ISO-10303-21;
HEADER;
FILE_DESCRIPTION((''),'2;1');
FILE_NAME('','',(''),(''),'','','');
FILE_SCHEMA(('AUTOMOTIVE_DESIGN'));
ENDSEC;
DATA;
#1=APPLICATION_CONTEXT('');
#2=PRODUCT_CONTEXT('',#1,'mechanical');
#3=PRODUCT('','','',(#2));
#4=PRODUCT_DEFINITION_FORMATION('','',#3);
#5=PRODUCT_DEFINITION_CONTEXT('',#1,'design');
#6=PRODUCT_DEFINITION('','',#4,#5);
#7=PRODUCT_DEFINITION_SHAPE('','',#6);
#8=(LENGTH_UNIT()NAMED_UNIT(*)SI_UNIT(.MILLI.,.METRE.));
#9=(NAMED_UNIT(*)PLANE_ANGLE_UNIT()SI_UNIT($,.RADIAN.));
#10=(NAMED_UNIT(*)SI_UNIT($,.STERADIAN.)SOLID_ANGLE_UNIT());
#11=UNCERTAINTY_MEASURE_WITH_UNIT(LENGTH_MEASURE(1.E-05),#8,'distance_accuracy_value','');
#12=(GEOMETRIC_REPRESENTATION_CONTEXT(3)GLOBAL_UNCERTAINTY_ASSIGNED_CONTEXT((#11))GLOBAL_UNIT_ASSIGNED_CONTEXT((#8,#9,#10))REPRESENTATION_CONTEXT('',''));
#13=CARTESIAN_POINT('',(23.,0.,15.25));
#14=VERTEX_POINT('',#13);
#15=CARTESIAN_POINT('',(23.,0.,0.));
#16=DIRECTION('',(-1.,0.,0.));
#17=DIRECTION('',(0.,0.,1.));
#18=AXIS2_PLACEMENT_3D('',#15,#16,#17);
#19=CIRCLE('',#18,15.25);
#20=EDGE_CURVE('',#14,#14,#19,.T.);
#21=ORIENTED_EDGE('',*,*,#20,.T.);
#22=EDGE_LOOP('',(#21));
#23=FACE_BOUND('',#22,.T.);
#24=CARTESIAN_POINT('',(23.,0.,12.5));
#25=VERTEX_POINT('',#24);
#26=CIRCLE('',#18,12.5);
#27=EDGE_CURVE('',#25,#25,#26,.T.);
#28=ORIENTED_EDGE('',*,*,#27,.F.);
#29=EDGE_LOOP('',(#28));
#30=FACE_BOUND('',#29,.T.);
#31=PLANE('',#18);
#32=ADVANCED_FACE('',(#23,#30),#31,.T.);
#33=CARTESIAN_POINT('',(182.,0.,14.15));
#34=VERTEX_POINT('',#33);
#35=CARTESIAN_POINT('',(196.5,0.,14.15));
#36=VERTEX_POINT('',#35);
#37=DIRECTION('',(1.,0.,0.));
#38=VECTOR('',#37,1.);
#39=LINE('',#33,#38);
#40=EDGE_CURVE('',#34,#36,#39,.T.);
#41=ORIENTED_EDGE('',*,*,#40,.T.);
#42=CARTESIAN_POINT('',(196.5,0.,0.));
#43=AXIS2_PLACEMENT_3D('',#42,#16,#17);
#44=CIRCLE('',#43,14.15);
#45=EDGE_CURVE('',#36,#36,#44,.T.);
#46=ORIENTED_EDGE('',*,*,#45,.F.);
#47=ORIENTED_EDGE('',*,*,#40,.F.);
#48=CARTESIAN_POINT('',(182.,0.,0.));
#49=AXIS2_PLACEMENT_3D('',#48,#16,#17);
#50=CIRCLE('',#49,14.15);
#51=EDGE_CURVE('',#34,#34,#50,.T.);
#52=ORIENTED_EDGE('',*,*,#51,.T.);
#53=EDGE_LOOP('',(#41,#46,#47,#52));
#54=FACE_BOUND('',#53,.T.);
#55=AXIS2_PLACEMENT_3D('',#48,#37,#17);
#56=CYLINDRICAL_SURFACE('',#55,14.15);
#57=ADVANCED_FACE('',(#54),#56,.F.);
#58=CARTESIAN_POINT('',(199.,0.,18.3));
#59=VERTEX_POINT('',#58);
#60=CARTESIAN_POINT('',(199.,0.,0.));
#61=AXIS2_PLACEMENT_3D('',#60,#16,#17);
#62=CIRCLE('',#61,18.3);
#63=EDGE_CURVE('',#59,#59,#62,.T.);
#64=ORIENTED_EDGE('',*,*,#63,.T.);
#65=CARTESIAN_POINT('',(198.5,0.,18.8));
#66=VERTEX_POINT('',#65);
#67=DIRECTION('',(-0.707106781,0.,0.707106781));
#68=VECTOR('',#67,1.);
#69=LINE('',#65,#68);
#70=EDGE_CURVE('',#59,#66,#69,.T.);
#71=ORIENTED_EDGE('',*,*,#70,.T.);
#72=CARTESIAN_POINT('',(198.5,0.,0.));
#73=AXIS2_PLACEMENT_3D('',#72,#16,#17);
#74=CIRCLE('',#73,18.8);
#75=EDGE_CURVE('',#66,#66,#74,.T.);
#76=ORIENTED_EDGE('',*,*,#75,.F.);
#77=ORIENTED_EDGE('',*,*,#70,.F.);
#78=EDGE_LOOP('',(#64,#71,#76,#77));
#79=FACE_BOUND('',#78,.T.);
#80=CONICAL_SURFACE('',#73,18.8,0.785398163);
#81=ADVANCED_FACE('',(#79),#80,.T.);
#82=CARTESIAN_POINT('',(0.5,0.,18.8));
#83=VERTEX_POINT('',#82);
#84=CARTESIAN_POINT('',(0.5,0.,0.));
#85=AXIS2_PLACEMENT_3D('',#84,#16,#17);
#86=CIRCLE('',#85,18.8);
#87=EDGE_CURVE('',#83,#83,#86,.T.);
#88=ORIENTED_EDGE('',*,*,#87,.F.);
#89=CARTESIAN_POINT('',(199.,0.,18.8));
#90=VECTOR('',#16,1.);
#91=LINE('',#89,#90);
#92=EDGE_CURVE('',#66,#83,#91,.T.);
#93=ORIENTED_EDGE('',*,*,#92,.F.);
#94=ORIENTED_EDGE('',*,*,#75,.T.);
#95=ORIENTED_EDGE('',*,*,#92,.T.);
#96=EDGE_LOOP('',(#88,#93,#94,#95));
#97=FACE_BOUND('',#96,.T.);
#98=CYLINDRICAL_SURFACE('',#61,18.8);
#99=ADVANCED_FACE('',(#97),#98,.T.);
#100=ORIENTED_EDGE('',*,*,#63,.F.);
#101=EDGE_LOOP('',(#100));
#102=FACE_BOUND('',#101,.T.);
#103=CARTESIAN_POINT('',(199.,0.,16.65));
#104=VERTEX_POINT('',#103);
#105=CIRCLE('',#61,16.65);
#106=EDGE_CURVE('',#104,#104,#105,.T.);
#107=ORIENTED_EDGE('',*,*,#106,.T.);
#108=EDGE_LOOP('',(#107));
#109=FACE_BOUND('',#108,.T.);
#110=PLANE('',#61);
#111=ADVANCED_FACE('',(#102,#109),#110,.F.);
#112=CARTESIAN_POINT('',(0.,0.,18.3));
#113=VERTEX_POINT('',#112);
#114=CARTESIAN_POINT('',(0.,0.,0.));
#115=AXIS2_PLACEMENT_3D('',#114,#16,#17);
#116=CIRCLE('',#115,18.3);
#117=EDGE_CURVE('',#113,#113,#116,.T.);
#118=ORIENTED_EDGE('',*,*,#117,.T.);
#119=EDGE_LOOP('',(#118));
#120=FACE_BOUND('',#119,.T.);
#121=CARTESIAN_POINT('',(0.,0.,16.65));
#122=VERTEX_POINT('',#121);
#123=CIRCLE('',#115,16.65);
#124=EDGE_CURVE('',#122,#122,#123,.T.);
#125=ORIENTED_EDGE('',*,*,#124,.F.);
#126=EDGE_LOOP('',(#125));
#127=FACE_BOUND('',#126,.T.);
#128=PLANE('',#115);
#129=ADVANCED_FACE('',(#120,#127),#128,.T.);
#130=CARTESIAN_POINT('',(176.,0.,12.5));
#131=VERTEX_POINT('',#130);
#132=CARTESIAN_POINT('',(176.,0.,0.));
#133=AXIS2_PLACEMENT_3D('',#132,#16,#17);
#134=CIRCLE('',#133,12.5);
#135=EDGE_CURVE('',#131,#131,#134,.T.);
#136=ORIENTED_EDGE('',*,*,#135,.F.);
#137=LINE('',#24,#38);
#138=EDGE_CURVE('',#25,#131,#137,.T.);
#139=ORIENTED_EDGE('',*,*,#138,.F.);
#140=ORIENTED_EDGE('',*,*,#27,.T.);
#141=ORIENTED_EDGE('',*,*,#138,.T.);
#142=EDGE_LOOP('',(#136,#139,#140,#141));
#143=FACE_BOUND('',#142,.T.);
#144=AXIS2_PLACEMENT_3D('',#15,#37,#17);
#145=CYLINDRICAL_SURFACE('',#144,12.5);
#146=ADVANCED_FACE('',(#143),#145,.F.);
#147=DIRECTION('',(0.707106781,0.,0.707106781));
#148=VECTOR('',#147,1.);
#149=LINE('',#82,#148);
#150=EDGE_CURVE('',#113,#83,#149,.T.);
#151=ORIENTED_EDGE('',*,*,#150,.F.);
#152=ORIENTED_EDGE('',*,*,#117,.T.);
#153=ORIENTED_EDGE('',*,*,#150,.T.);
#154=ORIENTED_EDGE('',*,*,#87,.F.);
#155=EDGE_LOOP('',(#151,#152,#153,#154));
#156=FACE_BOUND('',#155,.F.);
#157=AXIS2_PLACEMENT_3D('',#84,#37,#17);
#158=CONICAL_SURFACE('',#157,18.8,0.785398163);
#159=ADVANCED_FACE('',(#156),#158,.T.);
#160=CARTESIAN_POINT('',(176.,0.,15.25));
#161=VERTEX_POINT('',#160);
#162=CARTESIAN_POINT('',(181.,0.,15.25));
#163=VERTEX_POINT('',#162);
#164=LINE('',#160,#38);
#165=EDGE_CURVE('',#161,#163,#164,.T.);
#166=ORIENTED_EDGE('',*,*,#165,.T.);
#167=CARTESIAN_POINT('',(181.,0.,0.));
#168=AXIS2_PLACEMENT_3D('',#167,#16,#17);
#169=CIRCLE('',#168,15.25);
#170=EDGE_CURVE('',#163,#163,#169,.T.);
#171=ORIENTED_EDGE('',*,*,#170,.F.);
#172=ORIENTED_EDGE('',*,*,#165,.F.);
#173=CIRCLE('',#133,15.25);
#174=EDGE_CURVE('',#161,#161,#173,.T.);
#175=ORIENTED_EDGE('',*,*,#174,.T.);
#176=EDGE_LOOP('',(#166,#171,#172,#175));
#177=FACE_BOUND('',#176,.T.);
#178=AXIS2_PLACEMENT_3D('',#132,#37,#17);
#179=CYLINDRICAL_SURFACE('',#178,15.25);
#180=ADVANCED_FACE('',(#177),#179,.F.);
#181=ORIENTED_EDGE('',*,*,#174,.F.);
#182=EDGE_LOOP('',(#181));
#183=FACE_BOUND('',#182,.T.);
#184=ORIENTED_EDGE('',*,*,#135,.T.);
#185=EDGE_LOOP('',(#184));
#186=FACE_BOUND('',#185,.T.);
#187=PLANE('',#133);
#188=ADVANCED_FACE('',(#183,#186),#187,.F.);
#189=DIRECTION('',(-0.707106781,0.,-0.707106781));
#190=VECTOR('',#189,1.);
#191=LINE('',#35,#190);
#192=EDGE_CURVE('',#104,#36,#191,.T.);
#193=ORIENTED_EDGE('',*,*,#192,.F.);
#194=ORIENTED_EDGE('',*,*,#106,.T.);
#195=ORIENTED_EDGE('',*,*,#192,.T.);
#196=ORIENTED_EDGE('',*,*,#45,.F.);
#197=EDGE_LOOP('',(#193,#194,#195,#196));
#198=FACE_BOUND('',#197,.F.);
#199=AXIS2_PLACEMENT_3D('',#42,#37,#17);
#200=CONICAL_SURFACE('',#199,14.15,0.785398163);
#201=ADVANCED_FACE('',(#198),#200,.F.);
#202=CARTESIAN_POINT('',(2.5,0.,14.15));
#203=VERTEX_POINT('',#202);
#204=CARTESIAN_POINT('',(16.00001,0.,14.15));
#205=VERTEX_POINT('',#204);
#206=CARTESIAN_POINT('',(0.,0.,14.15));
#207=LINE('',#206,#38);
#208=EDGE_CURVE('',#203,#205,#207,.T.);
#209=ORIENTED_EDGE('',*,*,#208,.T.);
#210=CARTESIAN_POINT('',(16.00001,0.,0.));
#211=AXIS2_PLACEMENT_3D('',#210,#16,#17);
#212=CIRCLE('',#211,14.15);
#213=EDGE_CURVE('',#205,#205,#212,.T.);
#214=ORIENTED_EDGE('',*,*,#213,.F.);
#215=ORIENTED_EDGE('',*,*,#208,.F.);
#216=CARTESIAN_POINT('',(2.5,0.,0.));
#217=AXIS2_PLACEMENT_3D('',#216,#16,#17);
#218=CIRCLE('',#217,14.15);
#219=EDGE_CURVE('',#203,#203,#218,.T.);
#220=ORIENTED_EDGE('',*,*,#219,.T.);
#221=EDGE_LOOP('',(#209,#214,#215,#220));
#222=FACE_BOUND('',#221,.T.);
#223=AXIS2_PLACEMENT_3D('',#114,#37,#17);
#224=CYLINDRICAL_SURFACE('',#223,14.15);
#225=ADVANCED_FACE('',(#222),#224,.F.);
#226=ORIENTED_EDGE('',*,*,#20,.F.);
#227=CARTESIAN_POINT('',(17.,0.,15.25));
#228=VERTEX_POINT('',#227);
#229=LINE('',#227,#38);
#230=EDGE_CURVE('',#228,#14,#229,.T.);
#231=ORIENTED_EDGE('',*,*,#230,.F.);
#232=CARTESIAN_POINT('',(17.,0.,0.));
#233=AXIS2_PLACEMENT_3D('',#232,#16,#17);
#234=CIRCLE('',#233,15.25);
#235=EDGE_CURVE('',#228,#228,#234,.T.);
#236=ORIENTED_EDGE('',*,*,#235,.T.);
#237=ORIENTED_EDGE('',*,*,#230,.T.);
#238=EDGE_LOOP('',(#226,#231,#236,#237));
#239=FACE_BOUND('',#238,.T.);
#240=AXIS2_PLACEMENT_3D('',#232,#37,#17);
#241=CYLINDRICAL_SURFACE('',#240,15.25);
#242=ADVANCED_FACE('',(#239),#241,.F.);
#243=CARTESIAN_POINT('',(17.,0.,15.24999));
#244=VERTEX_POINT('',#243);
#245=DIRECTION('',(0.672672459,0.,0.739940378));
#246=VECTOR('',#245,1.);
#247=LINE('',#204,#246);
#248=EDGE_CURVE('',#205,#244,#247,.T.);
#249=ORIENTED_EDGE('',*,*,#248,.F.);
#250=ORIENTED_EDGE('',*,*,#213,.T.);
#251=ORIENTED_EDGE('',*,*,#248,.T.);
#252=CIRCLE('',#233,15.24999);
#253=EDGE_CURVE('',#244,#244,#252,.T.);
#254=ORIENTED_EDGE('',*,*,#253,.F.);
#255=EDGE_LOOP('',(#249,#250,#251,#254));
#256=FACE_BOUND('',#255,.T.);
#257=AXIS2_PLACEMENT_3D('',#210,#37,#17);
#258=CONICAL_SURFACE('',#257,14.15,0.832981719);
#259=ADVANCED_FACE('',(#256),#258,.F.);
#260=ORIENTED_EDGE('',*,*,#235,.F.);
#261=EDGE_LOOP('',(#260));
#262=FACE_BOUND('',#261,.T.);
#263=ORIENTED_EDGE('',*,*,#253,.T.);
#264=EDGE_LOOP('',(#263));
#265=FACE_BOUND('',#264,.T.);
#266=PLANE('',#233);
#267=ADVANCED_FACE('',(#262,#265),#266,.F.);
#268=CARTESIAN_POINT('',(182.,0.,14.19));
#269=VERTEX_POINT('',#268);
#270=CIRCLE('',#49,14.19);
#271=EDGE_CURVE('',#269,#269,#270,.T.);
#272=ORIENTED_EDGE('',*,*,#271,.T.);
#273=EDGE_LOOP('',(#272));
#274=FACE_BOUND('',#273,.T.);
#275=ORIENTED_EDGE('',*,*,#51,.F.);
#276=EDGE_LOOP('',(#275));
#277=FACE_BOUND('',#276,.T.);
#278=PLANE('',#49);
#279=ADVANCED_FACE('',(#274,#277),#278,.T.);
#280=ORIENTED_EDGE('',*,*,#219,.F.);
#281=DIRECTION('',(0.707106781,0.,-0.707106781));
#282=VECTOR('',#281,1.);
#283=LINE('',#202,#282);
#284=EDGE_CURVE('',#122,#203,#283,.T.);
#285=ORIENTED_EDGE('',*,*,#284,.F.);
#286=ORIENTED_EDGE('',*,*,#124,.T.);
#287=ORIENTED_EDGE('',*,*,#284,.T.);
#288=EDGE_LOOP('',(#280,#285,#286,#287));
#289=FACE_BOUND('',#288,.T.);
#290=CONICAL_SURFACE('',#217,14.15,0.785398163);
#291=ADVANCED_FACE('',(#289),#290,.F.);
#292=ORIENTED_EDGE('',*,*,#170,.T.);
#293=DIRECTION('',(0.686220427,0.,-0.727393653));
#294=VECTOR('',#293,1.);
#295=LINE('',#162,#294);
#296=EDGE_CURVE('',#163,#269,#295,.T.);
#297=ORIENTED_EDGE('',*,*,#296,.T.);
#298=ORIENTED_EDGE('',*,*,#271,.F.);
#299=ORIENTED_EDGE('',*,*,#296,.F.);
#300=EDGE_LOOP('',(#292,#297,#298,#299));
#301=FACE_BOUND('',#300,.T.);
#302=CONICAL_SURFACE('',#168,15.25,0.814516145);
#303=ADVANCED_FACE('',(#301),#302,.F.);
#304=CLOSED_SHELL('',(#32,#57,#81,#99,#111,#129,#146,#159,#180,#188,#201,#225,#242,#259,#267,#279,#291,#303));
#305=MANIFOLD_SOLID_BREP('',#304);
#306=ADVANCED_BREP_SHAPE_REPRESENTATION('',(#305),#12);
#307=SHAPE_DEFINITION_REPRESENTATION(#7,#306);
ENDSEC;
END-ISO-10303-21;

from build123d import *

# Parameters (mm, degrees)
F2_SIZE  = 0.5
F3_SIZE  = 2.5
F4_SIZE  = 2.5
F5_SIZE2 = 1.09999
F5_SIZE  = 0.99999
F6_SIZE2 = 1.06
F6_SIZE  = 1


# Not quite as in the source:
# - a fillet or chamfer is up to 0.001 mm smaller than in the source, because OpenCascade refuses the exact size


with BuildPart() as f1:
    # F0 (on Front) → F1 (revolve)
    with BuildSketch(Plane.XZ):
        Polygon((0, 18.8), (0, 14.15), (17, 14.15), (17, 15.25), (23, 15.25), (23, 12.5), (99.5, 12.5), (99.5, 18.8), align=None)
        Polygon((199, 18.8), (99.5, 18.8), (99.5, 12.5), (176, 12.5), (176, 15.25), (182, 15.25), (182, 14.15), (199, 14.15), align=None)
    revolve(axis=Axis((99.5, 0, 0), (-1, 0, 0)))

    # F2
    f2_edges = [f1.edges().sort_by_distance(p)[0] for p in [
        (199, 0, -18.8),
        (0, 0, -18.8),
    ]]
    chamfer(f2_edges, length=F2_SIZE)

    # F3
    f3_edges = [f1.edges().sort_by_distance(p)[0] for p in [
        (0, 0, -14.15),
    ]]
    chamfer(f3_edges, length=F3_SIZE)

    # F4
    f4_edges = [f1.edges().sort_by_distance(p)[0] for p in [
        (199, 0, -14.15),
    ]]
    chamfer(f4_edges, length=F4_SIZE)

    # F5 (size 1 and 1.1 in the source; OpenCascade refuses exactly that, so slightly less here)
    f5_edges = [f1.edges().sort_by_distance(p)[0] for p in [
        (17, 0, -14.15),
    ]]
    chamfer(f5_edges, length=F5_SIZE, length2=F5_SIZE2)

    # F6
    f6_edges = [f1.edges().sort_by_distance(p)[0] for p in [
        (182, 0, -15.25),
    ]]
    chamfer(f6_edges, length=F6_SIZE, length2=F6_SIZE2)


solid = f1.part
